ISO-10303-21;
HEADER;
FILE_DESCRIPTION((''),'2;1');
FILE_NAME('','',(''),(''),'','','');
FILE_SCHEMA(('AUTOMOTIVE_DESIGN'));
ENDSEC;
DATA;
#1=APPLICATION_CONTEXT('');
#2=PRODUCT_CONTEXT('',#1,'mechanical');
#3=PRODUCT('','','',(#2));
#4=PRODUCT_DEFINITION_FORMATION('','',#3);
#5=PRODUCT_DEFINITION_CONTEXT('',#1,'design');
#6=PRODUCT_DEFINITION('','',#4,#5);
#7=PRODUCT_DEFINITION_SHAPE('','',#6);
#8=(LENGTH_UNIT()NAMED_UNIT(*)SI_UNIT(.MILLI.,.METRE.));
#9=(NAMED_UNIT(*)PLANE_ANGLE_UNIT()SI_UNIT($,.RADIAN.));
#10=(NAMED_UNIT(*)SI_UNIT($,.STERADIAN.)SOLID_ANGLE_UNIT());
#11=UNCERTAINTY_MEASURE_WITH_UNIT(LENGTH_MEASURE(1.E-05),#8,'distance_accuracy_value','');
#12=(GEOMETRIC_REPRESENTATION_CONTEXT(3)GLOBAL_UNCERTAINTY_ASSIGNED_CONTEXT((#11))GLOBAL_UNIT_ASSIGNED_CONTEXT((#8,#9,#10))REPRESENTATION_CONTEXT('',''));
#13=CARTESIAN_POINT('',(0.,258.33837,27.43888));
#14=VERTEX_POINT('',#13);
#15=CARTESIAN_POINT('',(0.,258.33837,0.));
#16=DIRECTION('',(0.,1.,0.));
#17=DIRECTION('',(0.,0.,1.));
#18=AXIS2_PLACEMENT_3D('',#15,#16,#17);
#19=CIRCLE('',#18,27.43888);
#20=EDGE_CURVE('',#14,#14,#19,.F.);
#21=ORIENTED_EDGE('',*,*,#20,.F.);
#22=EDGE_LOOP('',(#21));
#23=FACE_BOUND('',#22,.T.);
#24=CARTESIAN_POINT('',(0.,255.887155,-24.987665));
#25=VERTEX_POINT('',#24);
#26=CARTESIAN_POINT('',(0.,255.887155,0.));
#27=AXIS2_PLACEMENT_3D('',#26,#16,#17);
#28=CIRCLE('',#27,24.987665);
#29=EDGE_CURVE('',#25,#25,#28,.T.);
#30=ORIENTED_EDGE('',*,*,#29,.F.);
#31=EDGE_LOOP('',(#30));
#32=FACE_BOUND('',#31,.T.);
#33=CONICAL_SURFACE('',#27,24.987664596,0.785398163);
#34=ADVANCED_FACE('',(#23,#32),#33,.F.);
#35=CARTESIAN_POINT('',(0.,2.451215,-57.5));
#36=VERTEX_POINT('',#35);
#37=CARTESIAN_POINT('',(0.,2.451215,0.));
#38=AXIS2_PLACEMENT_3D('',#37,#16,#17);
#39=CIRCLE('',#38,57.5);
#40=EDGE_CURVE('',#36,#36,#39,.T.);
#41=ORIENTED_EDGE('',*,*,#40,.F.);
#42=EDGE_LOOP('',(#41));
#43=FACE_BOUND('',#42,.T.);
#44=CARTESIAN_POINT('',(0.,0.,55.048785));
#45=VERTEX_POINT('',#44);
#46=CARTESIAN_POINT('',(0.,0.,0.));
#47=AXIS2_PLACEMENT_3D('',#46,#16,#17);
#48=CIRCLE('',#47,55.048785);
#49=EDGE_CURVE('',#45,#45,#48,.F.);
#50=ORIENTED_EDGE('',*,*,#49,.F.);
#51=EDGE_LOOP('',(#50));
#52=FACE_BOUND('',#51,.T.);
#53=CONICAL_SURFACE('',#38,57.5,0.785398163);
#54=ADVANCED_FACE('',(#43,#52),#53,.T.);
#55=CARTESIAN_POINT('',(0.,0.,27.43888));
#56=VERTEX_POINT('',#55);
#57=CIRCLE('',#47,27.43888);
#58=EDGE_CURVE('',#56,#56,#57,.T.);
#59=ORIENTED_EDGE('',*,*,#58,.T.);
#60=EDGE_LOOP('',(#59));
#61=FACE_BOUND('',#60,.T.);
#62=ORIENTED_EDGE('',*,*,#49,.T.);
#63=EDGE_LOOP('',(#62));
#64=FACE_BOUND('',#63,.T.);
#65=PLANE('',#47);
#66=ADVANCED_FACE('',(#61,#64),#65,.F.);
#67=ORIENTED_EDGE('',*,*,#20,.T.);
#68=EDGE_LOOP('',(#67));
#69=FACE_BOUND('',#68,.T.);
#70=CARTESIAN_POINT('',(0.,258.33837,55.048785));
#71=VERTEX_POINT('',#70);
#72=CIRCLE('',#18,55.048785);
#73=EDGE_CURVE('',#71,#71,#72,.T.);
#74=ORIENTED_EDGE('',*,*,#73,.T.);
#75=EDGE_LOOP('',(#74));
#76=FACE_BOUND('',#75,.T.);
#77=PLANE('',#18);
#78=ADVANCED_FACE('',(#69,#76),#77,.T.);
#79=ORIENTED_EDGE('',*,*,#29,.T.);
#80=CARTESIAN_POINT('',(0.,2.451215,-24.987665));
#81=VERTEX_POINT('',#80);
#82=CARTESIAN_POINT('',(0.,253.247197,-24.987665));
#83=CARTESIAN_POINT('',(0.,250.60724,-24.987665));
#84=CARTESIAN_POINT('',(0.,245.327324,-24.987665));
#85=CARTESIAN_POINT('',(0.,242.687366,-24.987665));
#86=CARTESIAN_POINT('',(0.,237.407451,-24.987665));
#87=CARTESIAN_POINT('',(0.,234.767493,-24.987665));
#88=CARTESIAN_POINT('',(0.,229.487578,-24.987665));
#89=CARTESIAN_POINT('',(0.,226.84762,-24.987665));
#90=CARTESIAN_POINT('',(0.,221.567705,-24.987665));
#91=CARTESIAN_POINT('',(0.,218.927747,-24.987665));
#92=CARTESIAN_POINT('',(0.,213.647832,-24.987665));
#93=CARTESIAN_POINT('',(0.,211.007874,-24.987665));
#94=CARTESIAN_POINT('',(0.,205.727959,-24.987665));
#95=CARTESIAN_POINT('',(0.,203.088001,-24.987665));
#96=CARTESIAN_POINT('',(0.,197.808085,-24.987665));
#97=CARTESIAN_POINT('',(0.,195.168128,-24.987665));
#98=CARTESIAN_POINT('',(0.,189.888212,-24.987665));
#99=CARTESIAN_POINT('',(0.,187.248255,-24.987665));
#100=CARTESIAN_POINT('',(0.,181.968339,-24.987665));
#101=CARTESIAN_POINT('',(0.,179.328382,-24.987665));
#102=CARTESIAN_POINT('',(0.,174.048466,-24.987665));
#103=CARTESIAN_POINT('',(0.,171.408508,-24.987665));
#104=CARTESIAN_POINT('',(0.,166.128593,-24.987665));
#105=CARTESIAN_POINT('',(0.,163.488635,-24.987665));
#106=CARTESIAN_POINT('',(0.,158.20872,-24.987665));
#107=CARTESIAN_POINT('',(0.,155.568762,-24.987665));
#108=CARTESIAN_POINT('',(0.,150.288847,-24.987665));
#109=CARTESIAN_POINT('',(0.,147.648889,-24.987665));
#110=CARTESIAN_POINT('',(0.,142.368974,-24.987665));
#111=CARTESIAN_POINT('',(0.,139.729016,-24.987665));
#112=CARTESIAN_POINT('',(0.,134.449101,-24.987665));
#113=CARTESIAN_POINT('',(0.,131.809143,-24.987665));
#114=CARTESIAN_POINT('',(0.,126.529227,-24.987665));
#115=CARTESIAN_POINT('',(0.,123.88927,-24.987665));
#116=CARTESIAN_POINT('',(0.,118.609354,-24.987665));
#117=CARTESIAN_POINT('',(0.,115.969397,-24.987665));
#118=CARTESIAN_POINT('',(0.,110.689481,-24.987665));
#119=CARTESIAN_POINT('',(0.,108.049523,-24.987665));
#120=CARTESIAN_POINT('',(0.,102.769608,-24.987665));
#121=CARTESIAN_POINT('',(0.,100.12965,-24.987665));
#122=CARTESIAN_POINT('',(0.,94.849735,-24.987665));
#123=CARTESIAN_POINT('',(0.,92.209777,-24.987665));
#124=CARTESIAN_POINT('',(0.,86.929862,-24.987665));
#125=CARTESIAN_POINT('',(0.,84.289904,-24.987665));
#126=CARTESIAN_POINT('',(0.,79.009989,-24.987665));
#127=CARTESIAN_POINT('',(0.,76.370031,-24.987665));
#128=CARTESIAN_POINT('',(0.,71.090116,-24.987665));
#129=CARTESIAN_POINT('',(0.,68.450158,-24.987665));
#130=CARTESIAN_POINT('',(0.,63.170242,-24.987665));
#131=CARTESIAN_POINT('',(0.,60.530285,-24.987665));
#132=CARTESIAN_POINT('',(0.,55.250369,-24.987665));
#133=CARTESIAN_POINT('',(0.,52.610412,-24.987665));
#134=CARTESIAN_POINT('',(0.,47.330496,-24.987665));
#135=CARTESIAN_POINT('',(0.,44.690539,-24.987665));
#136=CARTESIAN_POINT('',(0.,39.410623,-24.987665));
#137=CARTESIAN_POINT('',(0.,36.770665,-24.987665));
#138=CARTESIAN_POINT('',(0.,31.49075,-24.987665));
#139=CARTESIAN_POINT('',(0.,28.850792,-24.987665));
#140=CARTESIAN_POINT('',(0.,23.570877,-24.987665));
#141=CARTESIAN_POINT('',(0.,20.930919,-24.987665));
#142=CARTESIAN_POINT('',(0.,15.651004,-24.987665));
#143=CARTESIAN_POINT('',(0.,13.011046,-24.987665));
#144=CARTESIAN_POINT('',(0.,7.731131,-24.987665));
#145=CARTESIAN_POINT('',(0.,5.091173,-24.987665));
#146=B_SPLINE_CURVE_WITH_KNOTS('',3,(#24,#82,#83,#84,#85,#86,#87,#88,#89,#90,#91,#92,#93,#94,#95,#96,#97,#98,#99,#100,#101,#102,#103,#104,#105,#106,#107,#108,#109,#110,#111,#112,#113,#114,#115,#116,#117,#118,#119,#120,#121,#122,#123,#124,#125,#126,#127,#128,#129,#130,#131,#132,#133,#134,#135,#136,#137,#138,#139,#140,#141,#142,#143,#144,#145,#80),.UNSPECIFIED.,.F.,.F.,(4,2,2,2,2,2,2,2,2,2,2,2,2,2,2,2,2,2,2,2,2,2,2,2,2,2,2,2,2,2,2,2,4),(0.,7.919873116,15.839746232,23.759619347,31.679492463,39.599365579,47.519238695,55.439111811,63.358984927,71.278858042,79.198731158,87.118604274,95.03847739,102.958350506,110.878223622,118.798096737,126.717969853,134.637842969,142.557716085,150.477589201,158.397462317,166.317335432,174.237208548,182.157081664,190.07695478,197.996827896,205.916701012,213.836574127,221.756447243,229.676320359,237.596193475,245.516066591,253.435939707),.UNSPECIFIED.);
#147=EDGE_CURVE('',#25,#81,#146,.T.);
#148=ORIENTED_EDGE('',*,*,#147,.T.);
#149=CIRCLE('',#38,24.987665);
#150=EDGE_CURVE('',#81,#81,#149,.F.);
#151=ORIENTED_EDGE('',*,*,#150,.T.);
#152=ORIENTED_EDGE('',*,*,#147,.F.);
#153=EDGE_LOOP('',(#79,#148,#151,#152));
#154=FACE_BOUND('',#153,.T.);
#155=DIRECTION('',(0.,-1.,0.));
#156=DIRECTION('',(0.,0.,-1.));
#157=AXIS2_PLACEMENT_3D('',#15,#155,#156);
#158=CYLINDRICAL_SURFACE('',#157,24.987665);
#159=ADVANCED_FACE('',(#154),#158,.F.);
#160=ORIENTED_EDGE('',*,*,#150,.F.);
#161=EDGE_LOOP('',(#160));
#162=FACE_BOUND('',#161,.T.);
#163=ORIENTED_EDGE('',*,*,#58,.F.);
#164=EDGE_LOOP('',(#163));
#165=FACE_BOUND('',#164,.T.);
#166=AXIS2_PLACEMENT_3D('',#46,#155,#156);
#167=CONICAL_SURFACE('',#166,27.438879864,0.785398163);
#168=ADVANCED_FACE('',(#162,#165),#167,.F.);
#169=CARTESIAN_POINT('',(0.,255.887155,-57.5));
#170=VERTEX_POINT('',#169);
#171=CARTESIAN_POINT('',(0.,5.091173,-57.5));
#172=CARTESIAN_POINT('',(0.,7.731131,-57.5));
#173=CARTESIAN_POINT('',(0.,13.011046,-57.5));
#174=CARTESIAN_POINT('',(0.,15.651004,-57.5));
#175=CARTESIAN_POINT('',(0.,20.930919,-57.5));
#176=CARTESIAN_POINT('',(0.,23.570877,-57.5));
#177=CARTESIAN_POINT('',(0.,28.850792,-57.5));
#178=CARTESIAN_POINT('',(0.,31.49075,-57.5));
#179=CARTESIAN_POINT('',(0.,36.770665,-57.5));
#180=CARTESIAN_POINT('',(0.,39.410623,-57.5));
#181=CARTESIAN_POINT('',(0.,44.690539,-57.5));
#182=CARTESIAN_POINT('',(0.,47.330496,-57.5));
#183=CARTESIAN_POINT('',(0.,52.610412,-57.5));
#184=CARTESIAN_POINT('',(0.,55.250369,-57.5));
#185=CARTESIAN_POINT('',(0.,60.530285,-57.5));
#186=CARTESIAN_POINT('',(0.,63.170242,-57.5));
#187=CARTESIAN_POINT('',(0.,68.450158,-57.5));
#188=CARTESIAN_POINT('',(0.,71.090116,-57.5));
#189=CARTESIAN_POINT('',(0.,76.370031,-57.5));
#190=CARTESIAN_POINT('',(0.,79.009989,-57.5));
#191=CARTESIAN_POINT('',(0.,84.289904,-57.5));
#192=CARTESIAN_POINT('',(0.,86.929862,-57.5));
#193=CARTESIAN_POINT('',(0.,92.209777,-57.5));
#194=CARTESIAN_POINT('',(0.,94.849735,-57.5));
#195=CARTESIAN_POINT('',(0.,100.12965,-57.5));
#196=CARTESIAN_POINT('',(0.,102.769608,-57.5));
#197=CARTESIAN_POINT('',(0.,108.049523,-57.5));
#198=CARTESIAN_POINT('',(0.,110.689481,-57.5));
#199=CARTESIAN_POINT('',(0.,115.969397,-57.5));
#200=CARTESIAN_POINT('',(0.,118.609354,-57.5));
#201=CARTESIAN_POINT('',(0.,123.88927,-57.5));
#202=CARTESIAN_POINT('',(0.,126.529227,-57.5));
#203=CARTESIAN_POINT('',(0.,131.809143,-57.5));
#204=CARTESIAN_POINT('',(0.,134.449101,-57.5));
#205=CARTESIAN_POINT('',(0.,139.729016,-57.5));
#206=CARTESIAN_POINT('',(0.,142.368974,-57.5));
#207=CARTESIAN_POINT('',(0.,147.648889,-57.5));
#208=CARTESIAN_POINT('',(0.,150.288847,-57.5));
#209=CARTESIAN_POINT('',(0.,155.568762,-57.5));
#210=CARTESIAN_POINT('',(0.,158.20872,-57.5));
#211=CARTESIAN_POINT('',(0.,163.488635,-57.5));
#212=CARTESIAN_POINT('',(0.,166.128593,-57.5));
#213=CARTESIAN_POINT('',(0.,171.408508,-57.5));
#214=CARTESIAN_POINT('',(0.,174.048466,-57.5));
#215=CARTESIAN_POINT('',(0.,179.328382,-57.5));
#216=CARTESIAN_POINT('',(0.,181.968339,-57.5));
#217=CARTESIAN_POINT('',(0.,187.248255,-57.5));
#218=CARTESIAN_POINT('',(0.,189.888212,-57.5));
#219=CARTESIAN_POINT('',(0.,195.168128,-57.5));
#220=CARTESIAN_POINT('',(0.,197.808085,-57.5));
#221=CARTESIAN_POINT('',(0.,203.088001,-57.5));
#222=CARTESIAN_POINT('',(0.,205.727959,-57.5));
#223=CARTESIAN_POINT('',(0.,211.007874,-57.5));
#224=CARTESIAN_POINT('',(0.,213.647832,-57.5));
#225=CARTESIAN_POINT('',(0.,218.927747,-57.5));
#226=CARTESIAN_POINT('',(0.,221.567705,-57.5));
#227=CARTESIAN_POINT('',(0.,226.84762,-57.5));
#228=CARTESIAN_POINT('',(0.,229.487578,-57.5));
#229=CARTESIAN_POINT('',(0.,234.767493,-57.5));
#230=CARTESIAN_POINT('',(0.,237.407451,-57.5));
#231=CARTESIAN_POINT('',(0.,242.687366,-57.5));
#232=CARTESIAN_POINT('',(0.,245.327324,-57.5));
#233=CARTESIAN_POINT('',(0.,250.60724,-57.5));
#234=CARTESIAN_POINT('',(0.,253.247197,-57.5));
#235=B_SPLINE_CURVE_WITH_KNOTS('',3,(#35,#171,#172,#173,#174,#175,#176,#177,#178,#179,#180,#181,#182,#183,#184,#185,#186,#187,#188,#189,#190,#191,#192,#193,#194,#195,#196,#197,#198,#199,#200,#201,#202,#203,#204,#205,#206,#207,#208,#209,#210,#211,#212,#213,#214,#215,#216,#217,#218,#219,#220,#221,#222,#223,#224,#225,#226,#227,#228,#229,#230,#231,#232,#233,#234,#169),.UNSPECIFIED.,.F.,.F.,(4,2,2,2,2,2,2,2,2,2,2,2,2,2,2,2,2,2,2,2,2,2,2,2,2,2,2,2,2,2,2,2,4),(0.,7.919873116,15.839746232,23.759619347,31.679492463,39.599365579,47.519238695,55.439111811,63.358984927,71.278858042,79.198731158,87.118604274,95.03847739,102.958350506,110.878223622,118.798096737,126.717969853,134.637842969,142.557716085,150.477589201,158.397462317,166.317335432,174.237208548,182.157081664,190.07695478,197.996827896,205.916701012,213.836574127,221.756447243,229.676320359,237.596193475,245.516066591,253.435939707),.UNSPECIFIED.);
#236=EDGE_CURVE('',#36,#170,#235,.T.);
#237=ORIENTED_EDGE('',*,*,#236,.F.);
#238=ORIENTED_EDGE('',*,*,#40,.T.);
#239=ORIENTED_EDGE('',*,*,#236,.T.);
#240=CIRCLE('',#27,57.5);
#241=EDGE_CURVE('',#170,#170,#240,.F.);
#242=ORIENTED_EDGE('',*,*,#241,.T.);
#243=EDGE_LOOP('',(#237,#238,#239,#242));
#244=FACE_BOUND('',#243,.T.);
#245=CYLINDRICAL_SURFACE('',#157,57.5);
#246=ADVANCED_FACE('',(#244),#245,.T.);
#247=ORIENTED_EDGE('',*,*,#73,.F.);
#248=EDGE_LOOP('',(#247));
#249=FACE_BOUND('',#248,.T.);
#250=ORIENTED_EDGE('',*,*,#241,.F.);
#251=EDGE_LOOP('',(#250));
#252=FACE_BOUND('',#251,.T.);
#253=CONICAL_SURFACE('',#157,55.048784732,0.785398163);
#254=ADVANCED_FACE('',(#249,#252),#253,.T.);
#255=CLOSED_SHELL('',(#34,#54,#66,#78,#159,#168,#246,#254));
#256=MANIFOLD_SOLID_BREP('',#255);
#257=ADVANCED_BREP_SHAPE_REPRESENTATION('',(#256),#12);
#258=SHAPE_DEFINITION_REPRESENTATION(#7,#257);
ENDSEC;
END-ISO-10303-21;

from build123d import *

# Parameters (mm, degrees)
SKETCH1_R           = 57.5
BOSS_EXTRUDE1_DEPTH = 258.338370243
SKETCH2_R           = 24.987664596
CUT_EXTRUDE1_DEPTH  = 271.834291662
CHAMFER1_SIZE       = 2.451215268


with BuildPart() as part:
    # Sketch1 → Boss-Extrude1 (new body)
    with BuildSketch(Plane(origin=(0, 0, 0), x_dir=(1, 0, 0), z_dir=(0, 1, 0))):
        Circle(SKETCH1_R)
    extrude(amount=BOSS_EXTRUDE1_DEPTH)

    # Sketch2 → Cut-Extrude1 (cut, through all)
    with BuildSketch(Plane(origin=(0, 0, 0), x_dir=(1, 0, 0), z_dir=(0, 1, 0))):
        Circle(SKETCH2_R)
    extrude(amount=CUT_EXTRUDE1_DEPTH, mode=Mode.SUBTRACT)

    # Chamfer1
    chamfer1_edges = [part.edges().sort_by_distance(p)[0] for p in [
        (-24.987664596, 258.338370243, 0),
        (-24.987664596, 0, 0),
        (-57.5, 0, 0),
        (-57.5, 258.338370243, 0),
    ]]
    chamfer(chamfer1_edges, length=CHAMFER1_SIZE)


solid = part.part
